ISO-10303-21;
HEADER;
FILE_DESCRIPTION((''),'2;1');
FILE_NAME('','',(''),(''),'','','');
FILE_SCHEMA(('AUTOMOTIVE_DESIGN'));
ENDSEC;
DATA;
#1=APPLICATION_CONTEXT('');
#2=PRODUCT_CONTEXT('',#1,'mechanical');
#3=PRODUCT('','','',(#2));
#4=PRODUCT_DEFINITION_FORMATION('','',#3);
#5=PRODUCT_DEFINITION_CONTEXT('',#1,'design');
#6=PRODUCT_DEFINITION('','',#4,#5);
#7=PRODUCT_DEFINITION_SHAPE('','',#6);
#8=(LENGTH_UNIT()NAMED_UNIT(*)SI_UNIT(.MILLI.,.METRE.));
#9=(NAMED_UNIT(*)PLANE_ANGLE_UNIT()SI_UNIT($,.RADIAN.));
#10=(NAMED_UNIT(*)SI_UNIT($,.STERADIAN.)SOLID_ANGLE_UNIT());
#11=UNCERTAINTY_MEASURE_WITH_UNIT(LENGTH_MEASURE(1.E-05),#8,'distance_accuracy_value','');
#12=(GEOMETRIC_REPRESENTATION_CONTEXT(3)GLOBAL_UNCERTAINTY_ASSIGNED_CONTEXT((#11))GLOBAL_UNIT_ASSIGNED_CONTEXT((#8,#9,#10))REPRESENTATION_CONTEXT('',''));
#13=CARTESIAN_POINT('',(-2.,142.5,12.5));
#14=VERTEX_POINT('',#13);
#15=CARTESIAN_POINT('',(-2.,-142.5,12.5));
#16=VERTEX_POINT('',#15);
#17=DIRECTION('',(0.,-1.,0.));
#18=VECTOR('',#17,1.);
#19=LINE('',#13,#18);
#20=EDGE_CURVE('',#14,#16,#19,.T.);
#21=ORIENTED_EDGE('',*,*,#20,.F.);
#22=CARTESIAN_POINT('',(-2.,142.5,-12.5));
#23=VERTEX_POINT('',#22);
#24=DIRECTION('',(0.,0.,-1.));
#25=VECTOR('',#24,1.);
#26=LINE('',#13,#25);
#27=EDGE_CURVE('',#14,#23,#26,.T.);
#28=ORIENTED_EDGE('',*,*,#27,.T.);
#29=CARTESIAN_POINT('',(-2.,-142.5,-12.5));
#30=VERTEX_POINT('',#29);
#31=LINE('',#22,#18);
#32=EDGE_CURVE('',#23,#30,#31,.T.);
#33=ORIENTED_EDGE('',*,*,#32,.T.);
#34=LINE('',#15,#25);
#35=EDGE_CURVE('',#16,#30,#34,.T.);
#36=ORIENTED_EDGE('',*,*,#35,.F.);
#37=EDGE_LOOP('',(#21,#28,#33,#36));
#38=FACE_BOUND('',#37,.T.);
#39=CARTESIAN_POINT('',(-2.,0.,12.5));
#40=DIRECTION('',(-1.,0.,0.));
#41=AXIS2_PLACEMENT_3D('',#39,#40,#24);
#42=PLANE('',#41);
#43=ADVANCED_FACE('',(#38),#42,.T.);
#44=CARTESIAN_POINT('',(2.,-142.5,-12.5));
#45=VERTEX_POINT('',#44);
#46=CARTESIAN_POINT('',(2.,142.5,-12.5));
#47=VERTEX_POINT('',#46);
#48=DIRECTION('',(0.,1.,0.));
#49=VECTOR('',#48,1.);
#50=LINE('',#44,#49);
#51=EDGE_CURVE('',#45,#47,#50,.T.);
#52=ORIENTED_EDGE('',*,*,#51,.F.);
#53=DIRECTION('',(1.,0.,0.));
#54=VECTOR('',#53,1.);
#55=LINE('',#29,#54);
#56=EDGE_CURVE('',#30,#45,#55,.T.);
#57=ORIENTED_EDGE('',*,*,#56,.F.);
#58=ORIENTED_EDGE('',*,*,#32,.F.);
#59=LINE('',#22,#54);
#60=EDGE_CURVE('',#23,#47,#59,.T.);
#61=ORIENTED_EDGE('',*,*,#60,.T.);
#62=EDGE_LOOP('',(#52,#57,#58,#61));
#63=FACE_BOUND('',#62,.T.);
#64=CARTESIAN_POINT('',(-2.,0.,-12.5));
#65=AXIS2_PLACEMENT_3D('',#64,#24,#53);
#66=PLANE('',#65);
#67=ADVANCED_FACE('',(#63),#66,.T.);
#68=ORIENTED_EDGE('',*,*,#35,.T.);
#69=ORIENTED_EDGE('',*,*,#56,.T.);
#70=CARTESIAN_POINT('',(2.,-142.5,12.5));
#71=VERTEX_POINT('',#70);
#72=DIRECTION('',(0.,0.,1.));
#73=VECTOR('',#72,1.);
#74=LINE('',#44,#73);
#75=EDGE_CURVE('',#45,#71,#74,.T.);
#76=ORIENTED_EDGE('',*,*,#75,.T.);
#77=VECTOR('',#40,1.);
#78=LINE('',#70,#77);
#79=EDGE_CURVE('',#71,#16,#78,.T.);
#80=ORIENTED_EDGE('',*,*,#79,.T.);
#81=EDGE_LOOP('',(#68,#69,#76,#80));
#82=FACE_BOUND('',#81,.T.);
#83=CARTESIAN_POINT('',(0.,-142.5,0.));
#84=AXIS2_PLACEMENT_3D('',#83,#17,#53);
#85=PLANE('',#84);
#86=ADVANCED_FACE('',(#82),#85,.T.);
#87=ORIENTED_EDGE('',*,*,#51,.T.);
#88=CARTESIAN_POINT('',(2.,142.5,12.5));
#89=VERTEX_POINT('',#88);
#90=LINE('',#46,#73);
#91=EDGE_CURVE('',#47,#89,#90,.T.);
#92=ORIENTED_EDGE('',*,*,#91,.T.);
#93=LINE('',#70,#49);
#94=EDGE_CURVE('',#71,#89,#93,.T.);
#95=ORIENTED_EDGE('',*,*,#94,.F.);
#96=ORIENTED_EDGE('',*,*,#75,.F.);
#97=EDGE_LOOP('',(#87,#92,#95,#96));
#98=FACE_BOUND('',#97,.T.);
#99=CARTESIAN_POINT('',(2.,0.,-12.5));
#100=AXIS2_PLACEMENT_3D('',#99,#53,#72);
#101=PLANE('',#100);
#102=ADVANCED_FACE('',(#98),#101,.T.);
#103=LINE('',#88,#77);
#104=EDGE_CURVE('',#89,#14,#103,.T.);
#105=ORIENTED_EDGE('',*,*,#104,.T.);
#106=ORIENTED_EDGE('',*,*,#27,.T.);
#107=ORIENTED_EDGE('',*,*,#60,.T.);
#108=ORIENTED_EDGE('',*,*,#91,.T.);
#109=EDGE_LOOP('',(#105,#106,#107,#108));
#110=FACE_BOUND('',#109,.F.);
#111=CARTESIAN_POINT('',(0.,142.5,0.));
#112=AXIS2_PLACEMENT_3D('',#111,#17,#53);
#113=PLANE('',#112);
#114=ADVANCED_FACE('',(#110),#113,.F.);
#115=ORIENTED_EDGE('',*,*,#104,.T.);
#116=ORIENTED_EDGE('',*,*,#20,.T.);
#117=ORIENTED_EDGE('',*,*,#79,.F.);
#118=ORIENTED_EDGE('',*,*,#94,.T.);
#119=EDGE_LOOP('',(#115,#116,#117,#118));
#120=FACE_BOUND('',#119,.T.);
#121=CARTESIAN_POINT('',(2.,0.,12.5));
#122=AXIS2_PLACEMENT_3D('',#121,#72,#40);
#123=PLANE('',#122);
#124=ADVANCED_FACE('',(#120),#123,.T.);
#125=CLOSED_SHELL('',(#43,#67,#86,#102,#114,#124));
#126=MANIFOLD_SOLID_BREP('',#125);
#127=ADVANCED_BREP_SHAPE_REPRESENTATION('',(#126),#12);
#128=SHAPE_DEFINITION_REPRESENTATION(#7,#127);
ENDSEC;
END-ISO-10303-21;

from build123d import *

# Parameters (mm, degrees)
F1_DEPTH = 142.5


# Not quite as in the source:
# - a feature names something its author has since deleted; it is built from what else it names


with BuildPart() as f1:
    # F0 (on Front) → F1 (new body, symmetric)
    with BuildSketch(Plane.XZ):
        Polygon((2, 9.5), (2, 12.5), (-2, 12.5), (-2, -12.5), (2, -12.5), align=None)
    extrude(amount=F1_DEPTH, both=True)


solid = f1.part
